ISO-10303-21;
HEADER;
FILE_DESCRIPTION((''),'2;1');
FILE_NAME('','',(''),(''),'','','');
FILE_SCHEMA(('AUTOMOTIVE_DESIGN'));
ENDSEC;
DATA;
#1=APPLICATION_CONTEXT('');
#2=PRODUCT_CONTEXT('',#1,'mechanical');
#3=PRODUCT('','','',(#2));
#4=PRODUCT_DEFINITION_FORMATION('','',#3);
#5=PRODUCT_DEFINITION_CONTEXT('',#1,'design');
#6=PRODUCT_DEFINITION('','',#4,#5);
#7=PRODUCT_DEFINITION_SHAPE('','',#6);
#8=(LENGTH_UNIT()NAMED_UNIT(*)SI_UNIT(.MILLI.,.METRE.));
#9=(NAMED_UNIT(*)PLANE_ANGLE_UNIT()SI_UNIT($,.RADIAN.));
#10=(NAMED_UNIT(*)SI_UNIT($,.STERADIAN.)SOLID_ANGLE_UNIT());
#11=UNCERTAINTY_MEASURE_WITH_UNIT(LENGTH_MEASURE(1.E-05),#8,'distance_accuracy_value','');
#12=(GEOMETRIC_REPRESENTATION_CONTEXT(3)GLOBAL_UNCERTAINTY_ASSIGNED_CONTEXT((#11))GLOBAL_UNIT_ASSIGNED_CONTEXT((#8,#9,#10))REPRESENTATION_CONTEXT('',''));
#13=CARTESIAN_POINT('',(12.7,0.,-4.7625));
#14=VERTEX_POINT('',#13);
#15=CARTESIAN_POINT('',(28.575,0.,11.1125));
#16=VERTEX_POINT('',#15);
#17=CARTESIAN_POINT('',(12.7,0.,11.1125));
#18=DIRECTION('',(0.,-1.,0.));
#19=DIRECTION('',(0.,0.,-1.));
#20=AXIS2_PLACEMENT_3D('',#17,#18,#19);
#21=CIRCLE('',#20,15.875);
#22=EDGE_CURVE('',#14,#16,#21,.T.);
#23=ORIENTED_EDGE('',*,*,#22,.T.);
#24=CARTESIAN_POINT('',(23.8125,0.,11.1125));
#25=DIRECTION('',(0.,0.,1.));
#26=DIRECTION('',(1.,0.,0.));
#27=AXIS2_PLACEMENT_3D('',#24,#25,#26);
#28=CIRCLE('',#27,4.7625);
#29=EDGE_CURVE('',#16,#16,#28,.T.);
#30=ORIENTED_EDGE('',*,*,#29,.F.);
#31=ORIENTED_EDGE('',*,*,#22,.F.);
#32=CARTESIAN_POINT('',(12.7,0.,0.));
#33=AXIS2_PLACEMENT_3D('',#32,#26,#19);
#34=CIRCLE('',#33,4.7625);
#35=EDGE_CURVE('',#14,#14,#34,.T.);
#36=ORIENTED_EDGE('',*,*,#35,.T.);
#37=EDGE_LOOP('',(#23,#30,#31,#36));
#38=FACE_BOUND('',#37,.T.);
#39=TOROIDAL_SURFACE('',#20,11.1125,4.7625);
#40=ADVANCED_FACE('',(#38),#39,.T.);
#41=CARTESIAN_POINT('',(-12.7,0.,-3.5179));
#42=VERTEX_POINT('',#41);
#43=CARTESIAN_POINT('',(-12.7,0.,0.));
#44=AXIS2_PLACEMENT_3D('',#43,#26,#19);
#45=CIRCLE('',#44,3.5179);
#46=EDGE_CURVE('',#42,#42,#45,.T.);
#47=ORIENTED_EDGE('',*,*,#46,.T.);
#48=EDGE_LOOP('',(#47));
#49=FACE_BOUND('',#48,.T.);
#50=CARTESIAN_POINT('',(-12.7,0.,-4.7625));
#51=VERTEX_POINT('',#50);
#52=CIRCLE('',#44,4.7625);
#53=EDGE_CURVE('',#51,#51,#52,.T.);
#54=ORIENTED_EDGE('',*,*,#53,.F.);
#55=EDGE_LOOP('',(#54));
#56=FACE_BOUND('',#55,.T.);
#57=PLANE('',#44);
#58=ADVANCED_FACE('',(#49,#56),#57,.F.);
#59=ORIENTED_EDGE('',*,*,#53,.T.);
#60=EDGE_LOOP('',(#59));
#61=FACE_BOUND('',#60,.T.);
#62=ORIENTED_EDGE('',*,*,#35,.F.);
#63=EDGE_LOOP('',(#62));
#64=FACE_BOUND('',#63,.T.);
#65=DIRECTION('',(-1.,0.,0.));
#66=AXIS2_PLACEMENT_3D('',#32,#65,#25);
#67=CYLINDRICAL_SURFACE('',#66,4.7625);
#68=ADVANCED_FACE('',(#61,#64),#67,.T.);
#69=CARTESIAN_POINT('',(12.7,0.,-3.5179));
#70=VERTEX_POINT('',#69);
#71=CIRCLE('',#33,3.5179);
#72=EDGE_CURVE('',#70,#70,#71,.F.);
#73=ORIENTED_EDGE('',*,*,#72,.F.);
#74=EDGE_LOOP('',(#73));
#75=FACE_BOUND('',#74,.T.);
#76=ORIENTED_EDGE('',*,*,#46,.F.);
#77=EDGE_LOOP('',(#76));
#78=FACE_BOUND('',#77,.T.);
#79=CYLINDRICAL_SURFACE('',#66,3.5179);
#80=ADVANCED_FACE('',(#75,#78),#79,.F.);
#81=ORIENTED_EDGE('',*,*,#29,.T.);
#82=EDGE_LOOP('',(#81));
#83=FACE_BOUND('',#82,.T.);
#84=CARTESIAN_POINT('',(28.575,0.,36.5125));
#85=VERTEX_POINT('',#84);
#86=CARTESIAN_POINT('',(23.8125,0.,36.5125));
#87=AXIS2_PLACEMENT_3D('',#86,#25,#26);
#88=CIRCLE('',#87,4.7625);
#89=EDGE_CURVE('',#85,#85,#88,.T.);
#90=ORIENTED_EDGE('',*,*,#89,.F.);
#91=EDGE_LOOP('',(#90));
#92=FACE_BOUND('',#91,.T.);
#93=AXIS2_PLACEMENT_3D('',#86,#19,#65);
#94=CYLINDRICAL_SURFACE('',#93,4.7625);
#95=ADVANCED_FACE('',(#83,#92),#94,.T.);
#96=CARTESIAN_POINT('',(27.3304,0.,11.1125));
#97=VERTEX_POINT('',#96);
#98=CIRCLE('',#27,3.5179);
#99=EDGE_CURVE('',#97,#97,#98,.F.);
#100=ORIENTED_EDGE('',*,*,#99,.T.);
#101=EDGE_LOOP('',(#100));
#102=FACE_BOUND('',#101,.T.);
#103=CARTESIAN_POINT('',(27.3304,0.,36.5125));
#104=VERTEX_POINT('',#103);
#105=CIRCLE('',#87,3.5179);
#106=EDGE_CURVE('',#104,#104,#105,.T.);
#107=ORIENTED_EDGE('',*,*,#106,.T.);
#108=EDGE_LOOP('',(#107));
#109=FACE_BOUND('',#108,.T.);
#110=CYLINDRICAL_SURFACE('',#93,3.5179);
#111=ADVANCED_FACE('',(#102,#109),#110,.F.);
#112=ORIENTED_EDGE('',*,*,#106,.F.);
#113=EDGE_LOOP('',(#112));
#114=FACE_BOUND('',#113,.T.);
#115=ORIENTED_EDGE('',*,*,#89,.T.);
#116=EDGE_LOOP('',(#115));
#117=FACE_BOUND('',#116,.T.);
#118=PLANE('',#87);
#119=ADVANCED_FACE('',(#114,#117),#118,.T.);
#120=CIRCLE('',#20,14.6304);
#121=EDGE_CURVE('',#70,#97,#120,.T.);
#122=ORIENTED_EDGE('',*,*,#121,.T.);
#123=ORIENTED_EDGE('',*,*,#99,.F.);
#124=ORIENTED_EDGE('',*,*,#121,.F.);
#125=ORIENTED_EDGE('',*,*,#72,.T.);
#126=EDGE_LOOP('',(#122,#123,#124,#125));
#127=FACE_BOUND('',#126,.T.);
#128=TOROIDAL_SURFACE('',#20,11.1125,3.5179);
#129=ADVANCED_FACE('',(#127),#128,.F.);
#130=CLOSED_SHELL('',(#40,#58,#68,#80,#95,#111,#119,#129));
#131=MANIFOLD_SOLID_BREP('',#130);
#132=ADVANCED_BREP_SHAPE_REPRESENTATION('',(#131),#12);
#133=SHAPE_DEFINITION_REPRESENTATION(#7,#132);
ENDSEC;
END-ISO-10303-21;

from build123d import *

# Parameters (mm, degrees)
SKETCH4_R                = 4.7625
SKETCH4_R_2              = 3.5179
BOSS_EXTRUDE1_DEPTH      = 12.7
BEND_1_OUTLINE_R         = 4.7625
BEND_1_OUTLINE_R_2       = 3.5179
BEND_1_ANGLE             = 90
SKETCH6_R                = 4.7625
SKETCH6_R_2              = 3.5179
POST_BEND_1_LENGTH_DEPTH = 25.4


# Read off the part's stored shape, not the designer's step: Bend 1
with BuildPart() as part:
    # Sketch4 → Boss-Extrude1 (new, symmetric)
    with BuildSketch(Plane(origin=(0, 0, 0), x_dir=(0, 0, -1), z_dir=(1, 0, 0))):
        Circle(SKETCH4_R)
        Circle(SKETCH4_R_2, mode=Mode.SUBTRACT)
    extrude(amount=BOSS_EXTRUDE1_DEPTH, both=True)

    # Bend 1 outline → Bend 1 (revolve)
    with BuildSketch(Plane(origin=(12.7, 0, 11.1125), x_dir=(1, 0, 0), z_dir=(0, 0, 1))):
        with Locations((11.1125, 0)):
            Circle(BEND_1_OUTLINE_R)
        with Locations((11.1125, 0)):
            Circle(BEND_1_OUTLINE_R_2, mode=Mode.SUBTRACT)
    revolve(axis=Axis((12.7, 0, 11.1125), (0, 1, 0)), revolution_arc=BEND_1_ANGLE)

    # Sketch6 → Post Bend 1 Length (add)
    with BuildSketch(Plane.XY.offset(11.1125)):
        with Locations((23.8125, 0)):
            Circle(SKETCH6_R)
        with Locations((23.8125, 0)):
            Circle(SKETCH6_R_2, mode=Mode.SUBTRACT)
    extrude(amount=POST_BEND_1_LENGTH_DEPTH)


solid = part.part
